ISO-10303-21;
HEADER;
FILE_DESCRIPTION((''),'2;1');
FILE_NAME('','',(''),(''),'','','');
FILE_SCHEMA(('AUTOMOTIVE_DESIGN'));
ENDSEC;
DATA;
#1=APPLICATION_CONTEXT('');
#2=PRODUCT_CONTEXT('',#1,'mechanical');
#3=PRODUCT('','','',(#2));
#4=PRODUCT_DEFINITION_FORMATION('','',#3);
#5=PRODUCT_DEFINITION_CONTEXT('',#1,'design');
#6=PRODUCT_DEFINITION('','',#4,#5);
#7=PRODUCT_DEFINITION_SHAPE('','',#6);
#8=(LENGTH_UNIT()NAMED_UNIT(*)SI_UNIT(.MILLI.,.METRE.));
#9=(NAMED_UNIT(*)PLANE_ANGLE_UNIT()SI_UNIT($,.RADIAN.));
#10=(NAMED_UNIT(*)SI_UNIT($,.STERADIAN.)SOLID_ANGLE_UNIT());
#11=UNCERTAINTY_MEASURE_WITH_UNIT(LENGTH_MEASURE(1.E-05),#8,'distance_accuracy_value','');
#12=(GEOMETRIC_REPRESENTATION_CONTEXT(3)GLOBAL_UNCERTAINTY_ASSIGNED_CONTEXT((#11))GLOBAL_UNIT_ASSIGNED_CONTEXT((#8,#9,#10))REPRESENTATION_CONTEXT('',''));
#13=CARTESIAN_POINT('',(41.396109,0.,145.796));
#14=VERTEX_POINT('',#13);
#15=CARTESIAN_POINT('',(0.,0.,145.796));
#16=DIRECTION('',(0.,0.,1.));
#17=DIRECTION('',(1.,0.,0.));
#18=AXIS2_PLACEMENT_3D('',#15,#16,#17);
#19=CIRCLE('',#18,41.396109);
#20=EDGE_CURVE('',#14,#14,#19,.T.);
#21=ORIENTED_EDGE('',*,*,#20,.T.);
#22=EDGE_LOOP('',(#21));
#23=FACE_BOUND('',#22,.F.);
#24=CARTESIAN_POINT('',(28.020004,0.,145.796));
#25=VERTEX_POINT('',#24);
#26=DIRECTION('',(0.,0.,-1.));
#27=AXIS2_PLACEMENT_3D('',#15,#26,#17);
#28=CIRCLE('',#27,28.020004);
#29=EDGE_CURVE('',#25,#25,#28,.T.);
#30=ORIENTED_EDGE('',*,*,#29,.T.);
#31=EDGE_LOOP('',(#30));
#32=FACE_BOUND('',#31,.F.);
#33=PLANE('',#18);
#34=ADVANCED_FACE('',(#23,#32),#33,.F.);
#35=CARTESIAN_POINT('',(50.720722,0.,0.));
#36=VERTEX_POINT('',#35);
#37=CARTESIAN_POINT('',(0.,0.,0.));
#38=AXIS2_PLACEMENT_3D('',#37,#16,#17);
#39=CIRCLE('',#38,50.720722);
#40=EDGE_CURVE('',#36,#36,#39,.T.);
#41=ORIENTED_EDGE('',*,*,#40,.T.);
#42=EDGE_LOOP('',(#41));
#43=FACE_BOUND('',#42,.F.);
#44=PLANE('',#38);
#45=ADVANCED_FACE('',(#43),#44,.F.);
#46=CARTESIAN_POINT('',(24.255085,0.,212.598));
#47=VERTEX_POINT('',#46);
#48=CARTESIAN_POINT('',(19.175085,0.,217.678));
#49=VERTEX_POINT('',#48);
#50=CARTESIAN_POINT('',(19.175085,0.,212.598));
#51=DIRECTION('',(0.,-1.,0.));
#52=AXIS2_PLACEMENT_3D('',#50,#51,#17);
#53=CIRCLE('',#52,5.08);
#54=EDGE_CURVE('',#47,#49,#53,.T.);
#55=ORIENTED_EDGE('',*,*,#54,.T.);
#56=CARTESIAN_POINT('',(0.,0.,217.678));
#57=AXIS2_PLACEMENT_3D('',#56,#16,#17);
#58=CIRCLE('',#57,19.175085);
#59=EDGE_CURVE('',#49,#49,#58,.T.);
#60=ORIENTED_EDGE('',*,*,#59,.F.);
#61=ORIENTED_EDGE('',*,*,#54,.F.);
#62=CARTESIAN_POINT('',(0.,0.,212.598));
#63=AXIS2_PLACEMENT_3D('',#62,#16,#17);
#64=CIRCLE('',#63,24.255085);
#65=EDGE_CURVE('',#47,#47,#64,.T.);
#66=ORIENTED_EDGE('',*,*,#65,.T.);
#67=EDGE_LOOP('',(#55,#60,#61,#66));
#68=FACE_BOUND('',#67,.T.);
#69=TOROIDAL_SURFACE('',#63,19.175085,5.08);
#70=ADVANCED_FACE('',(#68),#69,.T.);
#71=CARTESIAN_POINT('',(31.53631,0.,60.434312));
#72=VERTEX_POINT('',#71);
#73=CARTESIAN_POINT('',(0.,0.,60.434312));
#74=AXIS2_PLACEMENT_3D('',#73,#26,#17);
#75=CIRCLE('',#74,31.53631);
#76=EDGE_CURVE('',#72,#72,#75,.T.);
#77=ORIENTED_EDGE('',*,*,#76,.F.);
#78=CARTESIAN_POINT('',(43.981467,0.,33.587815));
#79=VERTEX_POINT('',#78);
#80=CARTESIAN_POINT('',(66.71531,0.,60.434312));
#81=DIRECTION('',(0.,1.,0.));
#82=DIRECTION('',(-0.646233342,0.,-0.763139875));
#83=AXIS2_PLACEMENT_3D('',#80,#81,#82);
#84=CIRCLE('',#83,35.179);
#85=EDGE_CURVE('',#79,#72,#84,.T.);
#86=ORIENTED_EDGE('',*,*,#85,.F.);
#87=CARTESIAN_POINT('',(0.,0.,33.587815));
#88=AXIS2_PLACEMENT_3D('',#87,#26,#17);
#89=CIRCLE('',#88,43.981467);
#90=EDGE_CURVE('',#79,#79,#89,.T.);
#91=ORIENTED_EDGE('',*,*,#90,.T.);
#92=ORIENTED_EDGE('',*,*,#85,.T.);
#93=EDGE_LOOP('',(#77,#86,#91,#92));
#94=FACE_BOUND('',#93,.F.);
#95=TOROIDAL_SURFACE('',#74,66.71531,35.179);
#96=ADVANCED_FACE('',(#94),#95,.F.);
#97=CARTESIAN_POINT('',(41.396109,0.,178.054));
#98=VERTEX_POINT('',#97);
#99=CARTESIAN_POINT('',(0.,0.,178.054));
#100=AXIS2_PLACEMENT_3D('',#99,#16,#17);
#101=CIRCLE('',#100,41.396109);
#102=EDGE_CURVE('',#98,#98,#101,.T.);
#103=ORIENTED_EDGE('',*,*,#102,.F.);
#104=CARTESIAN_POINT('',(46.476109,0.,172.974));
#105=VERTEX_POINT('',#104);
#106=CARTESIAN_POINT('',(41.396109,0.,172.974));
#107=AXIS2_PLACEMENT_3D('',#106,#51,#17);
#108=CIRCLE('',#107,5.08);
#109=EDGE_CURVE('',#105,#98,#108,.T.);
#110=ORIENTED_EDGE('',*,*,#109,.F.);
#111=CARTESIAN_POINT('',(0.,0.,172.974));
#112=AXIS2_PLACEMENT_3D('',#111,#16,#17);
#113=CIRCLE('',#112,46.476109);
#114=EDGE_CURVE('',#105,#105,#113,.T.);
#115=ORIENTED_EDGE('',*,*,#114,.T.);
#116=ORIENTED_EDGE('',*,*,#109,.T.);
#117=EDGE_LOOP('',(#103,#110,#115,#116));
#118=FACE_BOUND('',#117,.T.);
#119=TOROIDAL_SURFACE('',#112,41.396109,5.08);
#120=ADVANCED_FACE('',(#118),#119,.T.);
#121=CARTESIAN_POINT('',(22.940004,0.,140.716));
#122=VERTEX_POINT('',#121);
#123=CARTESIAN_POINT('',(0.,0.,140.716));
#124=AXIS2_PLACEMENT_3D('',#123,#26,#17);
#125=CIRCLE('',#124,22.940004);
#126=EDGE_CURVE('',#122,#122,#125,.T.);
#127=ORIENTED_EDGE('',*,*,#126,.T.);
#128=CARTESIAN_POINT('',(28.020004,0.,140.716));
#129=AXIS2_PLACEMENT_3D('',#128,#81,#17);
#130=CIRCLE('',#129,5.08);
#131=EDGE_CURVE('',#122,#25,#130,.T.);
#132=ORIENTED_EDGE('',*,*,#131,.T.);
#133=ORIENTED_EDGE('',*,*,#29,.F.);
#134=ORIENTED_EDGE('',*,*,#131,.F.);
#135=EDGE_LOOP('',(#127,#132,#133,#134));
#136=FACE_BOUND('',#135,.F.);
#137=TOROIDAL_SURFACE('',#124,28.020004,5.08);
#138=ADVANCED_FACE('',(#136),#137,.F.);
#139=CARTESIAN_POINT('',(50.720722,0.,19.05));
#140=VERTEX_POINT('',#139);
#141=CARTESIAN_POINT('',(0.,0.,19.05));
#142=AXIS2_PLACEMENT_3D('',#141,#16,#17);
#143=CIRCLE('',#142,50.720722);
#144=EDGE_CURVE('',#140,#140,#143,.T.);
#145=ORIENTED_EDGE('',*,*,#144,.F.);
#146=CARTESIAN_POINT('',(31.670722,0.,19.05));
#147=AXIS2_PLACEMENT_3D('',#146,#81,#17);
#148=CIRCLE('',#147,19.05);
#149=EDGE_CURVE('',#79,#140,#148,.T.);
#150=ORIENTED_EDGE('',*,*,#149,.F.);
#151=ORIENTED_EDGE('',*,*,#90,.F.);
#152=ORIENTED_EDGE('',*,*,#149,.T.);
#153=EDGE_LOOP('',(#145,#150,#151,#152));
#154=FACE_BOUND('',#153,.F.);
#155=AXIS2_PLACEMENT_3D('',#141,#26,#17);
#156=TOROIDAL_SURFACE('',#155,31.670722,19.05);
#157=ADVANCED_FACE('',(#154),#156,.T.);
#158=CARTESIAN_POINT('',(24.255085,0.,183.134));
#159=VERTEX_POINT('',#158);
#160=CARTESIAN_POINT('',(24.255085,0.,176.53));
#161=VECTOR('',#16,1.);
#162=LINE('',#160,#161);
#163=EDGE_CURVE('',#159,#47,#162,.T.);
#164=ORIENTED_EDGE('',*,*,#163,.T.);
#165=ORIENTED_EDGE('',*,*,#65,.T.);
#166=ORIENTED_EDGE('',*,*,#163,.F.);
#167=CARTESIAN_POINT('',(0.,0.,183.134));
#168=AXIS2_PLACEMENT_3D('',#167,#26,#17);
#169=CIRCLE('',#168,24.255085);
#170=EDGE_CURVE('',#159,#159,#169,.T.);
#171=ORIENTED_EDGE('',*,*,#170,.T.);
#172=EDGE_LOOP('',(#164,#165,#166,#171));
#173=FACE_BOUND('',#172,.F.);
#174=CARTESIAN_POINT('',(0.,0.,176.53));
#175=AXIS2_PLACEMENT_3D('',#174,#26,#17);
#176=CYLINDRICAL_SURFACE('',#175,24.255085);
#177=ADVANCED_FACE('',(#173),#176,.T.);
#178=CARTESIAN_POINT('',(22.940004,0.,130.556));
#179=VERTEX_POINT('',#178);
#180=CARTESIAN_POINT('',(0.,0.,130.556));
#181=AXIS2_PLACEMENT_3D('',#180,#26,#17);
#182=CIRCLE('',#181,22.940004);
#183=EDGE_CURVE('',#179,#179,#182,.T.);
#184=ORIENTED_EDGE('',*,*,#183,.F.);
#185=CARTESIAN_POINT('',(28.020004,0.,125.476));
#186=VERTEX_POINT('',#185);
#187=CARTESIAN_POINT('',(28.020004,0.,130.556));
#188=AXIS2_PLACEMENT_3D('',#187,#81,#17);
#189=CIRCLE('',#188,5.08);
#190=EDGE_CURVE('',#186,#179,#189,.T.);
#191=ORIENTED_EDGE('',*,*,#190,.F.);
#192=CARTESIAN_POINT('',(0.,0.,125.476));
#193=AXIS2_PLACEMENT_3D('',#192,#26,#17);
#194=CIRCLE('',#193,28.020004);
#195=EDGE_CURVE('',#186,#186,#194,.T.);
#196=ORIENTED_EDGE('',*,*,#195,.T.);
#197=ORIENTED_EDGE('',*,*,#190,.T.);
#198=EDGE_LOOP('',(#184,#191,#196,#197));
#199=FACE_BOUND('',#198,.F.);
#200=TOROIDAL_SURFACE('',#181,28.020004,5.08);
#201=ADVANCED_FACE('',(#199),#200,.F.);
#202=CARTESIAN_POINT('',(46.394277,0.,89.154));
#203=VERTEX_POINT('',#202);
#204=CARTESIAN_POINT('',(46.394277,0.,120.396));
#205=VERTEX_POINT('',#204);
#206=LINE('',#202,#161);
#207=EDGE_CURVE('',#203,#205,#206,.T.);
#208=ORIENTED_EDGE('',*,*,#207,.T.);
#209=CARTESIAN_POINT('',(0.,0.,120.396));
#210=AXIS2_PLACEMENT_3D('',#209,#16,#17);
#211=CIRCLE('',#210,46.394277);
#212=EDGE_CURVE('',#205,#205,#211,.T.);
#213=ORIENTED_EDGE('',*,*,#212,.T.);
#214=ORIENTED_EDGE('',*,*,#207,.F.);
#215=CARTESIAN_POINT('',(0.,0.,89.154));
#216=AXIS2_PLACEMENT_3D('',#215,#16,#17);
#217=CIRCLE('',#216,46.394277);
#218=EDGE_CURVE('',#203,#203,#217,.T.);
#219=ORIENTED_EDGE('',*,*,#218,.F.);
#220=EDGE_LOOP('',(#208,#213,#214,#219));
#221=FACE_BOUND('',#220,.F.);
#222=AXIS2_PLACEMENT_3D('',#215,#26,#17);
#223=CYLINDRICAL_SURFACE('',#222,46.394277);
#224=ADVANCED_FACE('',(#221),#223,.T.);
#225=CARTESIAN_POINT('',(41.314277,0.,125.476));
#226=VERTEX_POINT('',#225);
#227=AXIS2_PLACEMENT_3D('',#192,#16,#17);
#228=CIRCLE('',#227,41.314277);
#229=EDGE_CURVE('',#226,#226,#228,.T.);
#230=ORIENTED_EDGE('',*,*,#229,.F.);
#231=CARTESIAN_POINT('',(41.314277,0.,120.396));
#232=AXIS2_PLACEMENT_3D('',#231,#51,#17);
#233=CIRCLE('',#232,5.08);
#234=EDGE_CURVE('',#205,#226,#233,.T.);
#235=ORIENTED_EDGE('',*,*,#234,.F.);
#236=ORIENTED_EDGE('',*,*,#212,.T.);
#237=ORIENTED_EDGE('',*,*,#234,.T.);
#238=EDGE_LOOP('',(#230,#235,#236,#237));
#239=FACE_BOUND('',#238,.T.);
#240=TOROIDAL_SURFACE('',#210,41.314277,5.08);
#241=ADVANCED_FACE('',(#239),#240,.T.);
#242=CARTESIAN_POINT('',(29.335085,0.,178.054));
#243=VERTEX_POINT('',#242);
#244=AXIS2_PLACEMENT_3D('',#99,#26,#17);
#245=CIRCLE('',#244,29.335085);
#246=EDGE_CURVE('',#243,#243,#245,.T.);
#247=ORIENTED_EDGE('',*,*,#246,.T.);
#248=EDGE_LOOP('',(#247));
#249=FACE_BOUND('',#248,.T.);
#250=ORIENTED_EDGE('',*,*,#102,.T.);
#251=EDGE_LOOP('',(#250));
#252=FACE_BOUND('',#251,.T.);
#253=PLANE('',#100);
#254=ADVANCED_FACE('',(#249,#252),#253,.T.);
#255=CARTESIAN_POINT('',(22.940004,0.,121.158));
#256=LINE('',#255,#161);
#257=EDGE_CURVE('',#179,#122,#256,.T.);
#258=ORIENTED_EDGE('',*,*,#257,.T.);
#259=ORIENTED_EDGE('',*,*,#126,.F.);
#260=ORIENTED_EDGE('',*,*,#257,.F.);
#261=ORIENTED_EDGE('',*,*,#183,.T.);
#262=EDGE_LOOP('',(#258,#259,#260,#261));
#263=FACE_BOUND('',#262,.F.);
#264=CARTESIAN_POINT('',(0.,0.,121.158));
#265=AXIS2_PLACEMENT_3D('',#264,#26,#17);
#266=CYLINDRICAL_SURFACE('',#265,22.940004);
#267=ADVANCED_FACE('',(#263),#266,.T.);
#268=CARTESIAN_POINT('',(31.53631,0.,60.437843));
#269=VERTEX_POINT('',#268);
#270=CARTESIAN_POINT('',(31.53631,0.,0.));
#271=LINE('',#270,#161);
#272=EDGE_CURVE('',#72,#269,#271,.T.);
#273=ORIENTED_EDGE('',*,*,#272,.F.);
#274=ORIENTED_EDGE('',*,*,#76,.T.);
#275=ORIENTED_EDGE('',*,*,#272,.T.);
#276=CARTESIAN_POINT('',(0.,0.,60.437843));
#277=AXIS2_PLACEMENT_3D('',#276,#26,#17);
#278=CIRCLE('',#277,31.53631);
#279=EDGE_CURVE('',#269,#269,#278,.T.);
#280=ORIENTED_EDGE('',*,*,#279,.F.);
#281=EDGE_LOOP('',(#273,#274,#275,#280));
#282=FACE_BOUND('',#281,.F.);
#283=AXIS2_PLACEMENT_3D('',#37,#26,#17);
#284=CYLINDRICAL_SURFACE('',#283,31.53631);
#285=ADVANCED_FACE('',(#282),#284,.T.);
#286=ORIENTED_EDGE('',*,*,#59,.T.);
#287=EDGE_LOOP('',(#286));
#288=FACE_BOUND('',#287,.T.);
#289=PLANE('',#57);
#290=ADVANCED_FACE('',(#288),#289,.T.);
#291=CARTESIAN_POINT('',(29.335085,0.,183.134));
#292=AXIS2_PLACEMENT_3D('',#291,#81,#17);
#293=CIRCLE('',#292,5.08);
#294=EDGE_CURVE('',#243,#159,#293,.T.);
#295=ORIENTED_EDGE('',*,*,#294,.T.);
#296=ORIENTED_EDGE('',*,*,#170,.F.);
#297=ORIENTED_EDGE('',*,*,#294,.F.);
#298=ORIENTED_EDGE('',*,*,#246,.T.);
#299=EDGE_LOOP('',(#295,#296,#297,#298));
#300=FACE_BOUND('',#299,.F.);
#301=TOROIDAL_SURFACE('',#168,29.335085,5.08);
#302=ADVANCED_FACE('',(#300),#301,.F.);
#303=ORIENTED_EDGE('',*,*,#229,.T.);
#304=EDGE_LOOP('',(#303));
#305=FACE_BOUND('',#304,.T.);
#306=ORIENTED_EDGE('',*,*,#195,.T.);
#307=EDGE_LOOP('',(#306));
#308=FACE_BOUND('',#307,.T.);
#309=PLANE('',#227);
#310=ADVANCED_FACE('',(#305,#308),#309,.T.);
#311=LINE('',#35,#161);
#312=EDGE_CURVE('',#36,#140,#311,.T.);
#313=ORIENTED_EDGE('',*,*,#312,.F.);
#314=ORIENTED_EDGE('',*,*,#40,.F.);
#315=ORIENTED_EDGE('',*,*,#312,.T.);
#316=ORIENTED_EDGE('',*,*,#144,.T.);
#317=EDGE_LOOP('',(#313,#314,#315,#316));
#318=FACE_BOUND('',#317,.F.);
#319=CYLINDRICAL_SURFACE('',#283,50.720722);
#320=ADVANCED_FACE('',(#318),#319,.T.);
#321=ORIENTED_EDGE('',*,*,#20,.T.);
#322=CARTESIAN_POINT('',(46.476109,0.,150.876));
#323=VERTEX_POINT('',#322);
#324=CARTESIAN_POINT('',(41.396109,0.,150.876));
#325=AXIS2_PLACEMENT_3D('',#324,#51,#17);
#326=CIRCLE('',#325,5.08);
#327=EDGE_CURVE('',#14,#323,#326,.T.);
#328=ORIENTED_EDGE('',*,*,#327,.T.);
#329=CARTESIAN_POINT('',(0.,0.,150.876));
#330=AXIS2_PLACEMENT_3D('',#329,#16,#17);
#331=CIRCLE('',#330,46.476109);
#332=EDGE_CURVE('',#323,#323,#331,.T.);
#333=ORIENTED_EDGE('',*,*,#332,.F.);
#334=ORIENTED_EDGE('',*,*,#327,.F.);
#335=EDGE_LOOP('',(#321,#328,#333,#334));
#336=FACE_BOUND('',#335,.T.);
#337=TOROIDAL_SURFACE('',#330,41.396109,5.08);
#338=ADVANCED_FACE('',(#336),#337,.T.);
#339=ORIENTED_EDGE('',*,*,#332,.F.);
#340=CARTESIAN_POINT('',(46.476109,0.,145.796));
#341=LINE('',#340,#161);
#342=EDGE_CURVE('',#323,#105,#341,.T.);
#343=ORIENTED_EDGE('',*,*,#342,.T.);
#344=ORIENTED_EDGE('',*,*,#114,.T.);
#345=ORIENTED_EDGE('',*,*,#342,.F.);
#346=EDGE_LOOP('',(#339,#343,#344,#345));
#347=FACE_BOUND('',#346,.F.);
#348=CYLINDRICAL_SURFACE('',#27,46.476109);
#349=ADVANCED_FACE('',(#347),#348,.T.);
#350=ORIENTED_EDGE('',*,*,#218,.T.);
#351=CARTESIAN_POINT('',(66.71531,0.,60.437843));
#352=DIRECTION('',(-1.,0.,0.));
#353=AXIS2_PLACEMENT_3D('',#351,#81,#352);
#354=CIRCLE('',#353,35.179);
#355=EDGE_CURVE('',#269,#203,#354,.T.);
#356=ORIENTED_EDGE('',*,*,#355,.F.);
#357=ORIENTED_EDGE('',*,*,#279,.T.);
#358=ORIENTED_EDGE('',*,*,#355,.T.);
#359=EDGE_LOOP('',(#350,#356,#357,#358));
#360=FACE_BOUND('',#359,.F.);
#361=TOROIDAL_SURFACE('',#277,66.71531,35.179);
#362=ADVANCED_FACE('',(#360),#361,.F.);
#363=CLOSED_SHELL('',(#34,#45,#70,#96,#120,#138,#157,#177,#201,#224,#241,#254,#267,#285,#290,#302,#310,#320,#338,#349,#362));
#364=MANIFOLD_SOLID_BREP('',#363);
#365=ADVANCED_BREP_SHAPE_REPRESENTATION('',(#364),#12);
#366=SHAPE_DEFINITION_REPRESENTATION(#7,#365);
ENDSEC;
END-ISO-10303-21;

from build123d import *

# Parameters (mm, degrees)
F0_R      = 50.7207222374
F1_DEPTH  = 38.1
F2_R      = 31.5363101215
F3_DEPTH  = 90.17
F5_START  = 89.154
F4_R      = 46.3942774272
F5_DEPTH  = 36.322
F7_START  = 121.158
F6_R      = 22.9400039182
F7_DEPTH  = 29.718
F9_START  = 145.796
F8_R      = 46.4761093374
F9_DEPTH  = 32.258
F11_START = 176.53
F10_R     = 24.2550849765
F11_DEPTH = 41.148
F12_R     = 19.05
F14_R     = 5.08
F15_R     = 5.08
F16_R     = 5.08


# Not quite as in the source:
# - a fillet or chamfer that OpenCascade refuses, or shapes differently, is made with other operations: its cross-section is extruded or revolved along the edge and cut away or added


with BuildPart() as f1:
    # F0 (on Top) → F1 (new body)
    with BuildSketch(Plane.XY):
        Circle(F0_R)
    extrude(amount=F1_DEPTH)

    # F2 (on Top) → F3 (join)
    with BuildSketch(Plane.XY):
        Circle(F2_R)
    extrude(amount=F3_DEPTH)

    # F4 (on Top) → F5 (join)
    with BuildSketch(Plane.XY.offset(F5_START)):
        Circle(F4_R)
    extrude(amount=F5_DEPTH)

    # F6 (on Top) → F7 (join)
    with BuildSketch(Plane.XY.offset(F7_START)):
        Circle(F6_R)
    extrude(amount=F7_DEPTH)

    # F8 (on Top) → F9 (join)
    with BuildSketch(Plane.XY.offset(F9_START)):
        Circle(F8_R)
    extrude(amount=F9_DEPTH)

    # F10 (on Top) → F11 (join)
    with BuildSketch(Plane.XY.offset(F11_START)):
        Circle(F10_R)
    extrude(amount=F11_DEPTH)

    # F12
    f12_edges = [f1.edges().sort_by_distance(p)[0] for p in [
        (-50.720722, 0, 38.1),
    ]]
    fillet(f12_edges, radius=F12_R)

    # F13: fillet of radius 35.179 on 3 edges, made by hand

    # F13_s1 → F13_t2 (revolve)
    with BuildSketch(Plane.XZ):
        with BuildLine():
            ThreePointArc((31.5363101215, 60.437843028), (35.470825407, 76.6039871547), (46.3942774272, 89.154))
            Line((46.3942774272, 89.154), (31.5363101215, 89.154))
            Line((31.5363101215, 89.154), (31.5363101215, 60.437843028))
        make_face()
    revolve(axis=Axis((0, 0, 89.154), (0, 0, -1)))

    # F13_s3 → F13_t4 (revolve)
    with BuildSketch(Plane.XZ):
        with BuildLine():
            ThreePointArc((43.9814673957, 33.5878146104), (34.7988888446, 45.6389043931), (31.5363101215, 60.4343122576))
            Line((31.5363101215, 60.4343122576), (28.0184101215, 60.4343122576))
            Line((28.0184101215, 60.4343122576), (28.0184101215, 38.1))
            Line((28.0184101215, 38.1), (31.5363101215, 34.5821))
            ThreePointArc((31.5363101215, 34.5821), (31.6707222374, 34.5821), (41.7080831232, 30.9031648457))
            Line((41.7080831232, 30.9031648457), (43.9814673957, 33.5878146104))
        make_face()
    revolve(axis=Axis((0, 0, 38.1), (0, 0, -1)))

    # F14
    f14_edges = [f1.edges().sort_by_distance(p)[0] for p in [
        (-46.394277, 0, 125.476),
    ]]
    fillet(f14_edges, radius=F14_R)

    # F15
    f15_edges = [f1.edges().sort_by_distance(p)[0] for p in [
        (22.940004, 0, 135.636),
        (-22.940004, 0, 145.796),
        (-22.940004, 0, 125.476),
    ]]
    fillet(f15_edges, radius=F15_R)

    # F16
    f16_edges = [f1.edges().sort_by_distance(p)[0] for p in [
        (-46.476109, 0, 145.796),
        (-46.476109, 0, 178.054),
        (-24.255085, 0, 178.054),
        (24.255085, 0, 197.866),
        (-24.255085, 0, 217.678),
    ]]
    fillet(f16_edges, radius=F16_R)


solid = f1.part
